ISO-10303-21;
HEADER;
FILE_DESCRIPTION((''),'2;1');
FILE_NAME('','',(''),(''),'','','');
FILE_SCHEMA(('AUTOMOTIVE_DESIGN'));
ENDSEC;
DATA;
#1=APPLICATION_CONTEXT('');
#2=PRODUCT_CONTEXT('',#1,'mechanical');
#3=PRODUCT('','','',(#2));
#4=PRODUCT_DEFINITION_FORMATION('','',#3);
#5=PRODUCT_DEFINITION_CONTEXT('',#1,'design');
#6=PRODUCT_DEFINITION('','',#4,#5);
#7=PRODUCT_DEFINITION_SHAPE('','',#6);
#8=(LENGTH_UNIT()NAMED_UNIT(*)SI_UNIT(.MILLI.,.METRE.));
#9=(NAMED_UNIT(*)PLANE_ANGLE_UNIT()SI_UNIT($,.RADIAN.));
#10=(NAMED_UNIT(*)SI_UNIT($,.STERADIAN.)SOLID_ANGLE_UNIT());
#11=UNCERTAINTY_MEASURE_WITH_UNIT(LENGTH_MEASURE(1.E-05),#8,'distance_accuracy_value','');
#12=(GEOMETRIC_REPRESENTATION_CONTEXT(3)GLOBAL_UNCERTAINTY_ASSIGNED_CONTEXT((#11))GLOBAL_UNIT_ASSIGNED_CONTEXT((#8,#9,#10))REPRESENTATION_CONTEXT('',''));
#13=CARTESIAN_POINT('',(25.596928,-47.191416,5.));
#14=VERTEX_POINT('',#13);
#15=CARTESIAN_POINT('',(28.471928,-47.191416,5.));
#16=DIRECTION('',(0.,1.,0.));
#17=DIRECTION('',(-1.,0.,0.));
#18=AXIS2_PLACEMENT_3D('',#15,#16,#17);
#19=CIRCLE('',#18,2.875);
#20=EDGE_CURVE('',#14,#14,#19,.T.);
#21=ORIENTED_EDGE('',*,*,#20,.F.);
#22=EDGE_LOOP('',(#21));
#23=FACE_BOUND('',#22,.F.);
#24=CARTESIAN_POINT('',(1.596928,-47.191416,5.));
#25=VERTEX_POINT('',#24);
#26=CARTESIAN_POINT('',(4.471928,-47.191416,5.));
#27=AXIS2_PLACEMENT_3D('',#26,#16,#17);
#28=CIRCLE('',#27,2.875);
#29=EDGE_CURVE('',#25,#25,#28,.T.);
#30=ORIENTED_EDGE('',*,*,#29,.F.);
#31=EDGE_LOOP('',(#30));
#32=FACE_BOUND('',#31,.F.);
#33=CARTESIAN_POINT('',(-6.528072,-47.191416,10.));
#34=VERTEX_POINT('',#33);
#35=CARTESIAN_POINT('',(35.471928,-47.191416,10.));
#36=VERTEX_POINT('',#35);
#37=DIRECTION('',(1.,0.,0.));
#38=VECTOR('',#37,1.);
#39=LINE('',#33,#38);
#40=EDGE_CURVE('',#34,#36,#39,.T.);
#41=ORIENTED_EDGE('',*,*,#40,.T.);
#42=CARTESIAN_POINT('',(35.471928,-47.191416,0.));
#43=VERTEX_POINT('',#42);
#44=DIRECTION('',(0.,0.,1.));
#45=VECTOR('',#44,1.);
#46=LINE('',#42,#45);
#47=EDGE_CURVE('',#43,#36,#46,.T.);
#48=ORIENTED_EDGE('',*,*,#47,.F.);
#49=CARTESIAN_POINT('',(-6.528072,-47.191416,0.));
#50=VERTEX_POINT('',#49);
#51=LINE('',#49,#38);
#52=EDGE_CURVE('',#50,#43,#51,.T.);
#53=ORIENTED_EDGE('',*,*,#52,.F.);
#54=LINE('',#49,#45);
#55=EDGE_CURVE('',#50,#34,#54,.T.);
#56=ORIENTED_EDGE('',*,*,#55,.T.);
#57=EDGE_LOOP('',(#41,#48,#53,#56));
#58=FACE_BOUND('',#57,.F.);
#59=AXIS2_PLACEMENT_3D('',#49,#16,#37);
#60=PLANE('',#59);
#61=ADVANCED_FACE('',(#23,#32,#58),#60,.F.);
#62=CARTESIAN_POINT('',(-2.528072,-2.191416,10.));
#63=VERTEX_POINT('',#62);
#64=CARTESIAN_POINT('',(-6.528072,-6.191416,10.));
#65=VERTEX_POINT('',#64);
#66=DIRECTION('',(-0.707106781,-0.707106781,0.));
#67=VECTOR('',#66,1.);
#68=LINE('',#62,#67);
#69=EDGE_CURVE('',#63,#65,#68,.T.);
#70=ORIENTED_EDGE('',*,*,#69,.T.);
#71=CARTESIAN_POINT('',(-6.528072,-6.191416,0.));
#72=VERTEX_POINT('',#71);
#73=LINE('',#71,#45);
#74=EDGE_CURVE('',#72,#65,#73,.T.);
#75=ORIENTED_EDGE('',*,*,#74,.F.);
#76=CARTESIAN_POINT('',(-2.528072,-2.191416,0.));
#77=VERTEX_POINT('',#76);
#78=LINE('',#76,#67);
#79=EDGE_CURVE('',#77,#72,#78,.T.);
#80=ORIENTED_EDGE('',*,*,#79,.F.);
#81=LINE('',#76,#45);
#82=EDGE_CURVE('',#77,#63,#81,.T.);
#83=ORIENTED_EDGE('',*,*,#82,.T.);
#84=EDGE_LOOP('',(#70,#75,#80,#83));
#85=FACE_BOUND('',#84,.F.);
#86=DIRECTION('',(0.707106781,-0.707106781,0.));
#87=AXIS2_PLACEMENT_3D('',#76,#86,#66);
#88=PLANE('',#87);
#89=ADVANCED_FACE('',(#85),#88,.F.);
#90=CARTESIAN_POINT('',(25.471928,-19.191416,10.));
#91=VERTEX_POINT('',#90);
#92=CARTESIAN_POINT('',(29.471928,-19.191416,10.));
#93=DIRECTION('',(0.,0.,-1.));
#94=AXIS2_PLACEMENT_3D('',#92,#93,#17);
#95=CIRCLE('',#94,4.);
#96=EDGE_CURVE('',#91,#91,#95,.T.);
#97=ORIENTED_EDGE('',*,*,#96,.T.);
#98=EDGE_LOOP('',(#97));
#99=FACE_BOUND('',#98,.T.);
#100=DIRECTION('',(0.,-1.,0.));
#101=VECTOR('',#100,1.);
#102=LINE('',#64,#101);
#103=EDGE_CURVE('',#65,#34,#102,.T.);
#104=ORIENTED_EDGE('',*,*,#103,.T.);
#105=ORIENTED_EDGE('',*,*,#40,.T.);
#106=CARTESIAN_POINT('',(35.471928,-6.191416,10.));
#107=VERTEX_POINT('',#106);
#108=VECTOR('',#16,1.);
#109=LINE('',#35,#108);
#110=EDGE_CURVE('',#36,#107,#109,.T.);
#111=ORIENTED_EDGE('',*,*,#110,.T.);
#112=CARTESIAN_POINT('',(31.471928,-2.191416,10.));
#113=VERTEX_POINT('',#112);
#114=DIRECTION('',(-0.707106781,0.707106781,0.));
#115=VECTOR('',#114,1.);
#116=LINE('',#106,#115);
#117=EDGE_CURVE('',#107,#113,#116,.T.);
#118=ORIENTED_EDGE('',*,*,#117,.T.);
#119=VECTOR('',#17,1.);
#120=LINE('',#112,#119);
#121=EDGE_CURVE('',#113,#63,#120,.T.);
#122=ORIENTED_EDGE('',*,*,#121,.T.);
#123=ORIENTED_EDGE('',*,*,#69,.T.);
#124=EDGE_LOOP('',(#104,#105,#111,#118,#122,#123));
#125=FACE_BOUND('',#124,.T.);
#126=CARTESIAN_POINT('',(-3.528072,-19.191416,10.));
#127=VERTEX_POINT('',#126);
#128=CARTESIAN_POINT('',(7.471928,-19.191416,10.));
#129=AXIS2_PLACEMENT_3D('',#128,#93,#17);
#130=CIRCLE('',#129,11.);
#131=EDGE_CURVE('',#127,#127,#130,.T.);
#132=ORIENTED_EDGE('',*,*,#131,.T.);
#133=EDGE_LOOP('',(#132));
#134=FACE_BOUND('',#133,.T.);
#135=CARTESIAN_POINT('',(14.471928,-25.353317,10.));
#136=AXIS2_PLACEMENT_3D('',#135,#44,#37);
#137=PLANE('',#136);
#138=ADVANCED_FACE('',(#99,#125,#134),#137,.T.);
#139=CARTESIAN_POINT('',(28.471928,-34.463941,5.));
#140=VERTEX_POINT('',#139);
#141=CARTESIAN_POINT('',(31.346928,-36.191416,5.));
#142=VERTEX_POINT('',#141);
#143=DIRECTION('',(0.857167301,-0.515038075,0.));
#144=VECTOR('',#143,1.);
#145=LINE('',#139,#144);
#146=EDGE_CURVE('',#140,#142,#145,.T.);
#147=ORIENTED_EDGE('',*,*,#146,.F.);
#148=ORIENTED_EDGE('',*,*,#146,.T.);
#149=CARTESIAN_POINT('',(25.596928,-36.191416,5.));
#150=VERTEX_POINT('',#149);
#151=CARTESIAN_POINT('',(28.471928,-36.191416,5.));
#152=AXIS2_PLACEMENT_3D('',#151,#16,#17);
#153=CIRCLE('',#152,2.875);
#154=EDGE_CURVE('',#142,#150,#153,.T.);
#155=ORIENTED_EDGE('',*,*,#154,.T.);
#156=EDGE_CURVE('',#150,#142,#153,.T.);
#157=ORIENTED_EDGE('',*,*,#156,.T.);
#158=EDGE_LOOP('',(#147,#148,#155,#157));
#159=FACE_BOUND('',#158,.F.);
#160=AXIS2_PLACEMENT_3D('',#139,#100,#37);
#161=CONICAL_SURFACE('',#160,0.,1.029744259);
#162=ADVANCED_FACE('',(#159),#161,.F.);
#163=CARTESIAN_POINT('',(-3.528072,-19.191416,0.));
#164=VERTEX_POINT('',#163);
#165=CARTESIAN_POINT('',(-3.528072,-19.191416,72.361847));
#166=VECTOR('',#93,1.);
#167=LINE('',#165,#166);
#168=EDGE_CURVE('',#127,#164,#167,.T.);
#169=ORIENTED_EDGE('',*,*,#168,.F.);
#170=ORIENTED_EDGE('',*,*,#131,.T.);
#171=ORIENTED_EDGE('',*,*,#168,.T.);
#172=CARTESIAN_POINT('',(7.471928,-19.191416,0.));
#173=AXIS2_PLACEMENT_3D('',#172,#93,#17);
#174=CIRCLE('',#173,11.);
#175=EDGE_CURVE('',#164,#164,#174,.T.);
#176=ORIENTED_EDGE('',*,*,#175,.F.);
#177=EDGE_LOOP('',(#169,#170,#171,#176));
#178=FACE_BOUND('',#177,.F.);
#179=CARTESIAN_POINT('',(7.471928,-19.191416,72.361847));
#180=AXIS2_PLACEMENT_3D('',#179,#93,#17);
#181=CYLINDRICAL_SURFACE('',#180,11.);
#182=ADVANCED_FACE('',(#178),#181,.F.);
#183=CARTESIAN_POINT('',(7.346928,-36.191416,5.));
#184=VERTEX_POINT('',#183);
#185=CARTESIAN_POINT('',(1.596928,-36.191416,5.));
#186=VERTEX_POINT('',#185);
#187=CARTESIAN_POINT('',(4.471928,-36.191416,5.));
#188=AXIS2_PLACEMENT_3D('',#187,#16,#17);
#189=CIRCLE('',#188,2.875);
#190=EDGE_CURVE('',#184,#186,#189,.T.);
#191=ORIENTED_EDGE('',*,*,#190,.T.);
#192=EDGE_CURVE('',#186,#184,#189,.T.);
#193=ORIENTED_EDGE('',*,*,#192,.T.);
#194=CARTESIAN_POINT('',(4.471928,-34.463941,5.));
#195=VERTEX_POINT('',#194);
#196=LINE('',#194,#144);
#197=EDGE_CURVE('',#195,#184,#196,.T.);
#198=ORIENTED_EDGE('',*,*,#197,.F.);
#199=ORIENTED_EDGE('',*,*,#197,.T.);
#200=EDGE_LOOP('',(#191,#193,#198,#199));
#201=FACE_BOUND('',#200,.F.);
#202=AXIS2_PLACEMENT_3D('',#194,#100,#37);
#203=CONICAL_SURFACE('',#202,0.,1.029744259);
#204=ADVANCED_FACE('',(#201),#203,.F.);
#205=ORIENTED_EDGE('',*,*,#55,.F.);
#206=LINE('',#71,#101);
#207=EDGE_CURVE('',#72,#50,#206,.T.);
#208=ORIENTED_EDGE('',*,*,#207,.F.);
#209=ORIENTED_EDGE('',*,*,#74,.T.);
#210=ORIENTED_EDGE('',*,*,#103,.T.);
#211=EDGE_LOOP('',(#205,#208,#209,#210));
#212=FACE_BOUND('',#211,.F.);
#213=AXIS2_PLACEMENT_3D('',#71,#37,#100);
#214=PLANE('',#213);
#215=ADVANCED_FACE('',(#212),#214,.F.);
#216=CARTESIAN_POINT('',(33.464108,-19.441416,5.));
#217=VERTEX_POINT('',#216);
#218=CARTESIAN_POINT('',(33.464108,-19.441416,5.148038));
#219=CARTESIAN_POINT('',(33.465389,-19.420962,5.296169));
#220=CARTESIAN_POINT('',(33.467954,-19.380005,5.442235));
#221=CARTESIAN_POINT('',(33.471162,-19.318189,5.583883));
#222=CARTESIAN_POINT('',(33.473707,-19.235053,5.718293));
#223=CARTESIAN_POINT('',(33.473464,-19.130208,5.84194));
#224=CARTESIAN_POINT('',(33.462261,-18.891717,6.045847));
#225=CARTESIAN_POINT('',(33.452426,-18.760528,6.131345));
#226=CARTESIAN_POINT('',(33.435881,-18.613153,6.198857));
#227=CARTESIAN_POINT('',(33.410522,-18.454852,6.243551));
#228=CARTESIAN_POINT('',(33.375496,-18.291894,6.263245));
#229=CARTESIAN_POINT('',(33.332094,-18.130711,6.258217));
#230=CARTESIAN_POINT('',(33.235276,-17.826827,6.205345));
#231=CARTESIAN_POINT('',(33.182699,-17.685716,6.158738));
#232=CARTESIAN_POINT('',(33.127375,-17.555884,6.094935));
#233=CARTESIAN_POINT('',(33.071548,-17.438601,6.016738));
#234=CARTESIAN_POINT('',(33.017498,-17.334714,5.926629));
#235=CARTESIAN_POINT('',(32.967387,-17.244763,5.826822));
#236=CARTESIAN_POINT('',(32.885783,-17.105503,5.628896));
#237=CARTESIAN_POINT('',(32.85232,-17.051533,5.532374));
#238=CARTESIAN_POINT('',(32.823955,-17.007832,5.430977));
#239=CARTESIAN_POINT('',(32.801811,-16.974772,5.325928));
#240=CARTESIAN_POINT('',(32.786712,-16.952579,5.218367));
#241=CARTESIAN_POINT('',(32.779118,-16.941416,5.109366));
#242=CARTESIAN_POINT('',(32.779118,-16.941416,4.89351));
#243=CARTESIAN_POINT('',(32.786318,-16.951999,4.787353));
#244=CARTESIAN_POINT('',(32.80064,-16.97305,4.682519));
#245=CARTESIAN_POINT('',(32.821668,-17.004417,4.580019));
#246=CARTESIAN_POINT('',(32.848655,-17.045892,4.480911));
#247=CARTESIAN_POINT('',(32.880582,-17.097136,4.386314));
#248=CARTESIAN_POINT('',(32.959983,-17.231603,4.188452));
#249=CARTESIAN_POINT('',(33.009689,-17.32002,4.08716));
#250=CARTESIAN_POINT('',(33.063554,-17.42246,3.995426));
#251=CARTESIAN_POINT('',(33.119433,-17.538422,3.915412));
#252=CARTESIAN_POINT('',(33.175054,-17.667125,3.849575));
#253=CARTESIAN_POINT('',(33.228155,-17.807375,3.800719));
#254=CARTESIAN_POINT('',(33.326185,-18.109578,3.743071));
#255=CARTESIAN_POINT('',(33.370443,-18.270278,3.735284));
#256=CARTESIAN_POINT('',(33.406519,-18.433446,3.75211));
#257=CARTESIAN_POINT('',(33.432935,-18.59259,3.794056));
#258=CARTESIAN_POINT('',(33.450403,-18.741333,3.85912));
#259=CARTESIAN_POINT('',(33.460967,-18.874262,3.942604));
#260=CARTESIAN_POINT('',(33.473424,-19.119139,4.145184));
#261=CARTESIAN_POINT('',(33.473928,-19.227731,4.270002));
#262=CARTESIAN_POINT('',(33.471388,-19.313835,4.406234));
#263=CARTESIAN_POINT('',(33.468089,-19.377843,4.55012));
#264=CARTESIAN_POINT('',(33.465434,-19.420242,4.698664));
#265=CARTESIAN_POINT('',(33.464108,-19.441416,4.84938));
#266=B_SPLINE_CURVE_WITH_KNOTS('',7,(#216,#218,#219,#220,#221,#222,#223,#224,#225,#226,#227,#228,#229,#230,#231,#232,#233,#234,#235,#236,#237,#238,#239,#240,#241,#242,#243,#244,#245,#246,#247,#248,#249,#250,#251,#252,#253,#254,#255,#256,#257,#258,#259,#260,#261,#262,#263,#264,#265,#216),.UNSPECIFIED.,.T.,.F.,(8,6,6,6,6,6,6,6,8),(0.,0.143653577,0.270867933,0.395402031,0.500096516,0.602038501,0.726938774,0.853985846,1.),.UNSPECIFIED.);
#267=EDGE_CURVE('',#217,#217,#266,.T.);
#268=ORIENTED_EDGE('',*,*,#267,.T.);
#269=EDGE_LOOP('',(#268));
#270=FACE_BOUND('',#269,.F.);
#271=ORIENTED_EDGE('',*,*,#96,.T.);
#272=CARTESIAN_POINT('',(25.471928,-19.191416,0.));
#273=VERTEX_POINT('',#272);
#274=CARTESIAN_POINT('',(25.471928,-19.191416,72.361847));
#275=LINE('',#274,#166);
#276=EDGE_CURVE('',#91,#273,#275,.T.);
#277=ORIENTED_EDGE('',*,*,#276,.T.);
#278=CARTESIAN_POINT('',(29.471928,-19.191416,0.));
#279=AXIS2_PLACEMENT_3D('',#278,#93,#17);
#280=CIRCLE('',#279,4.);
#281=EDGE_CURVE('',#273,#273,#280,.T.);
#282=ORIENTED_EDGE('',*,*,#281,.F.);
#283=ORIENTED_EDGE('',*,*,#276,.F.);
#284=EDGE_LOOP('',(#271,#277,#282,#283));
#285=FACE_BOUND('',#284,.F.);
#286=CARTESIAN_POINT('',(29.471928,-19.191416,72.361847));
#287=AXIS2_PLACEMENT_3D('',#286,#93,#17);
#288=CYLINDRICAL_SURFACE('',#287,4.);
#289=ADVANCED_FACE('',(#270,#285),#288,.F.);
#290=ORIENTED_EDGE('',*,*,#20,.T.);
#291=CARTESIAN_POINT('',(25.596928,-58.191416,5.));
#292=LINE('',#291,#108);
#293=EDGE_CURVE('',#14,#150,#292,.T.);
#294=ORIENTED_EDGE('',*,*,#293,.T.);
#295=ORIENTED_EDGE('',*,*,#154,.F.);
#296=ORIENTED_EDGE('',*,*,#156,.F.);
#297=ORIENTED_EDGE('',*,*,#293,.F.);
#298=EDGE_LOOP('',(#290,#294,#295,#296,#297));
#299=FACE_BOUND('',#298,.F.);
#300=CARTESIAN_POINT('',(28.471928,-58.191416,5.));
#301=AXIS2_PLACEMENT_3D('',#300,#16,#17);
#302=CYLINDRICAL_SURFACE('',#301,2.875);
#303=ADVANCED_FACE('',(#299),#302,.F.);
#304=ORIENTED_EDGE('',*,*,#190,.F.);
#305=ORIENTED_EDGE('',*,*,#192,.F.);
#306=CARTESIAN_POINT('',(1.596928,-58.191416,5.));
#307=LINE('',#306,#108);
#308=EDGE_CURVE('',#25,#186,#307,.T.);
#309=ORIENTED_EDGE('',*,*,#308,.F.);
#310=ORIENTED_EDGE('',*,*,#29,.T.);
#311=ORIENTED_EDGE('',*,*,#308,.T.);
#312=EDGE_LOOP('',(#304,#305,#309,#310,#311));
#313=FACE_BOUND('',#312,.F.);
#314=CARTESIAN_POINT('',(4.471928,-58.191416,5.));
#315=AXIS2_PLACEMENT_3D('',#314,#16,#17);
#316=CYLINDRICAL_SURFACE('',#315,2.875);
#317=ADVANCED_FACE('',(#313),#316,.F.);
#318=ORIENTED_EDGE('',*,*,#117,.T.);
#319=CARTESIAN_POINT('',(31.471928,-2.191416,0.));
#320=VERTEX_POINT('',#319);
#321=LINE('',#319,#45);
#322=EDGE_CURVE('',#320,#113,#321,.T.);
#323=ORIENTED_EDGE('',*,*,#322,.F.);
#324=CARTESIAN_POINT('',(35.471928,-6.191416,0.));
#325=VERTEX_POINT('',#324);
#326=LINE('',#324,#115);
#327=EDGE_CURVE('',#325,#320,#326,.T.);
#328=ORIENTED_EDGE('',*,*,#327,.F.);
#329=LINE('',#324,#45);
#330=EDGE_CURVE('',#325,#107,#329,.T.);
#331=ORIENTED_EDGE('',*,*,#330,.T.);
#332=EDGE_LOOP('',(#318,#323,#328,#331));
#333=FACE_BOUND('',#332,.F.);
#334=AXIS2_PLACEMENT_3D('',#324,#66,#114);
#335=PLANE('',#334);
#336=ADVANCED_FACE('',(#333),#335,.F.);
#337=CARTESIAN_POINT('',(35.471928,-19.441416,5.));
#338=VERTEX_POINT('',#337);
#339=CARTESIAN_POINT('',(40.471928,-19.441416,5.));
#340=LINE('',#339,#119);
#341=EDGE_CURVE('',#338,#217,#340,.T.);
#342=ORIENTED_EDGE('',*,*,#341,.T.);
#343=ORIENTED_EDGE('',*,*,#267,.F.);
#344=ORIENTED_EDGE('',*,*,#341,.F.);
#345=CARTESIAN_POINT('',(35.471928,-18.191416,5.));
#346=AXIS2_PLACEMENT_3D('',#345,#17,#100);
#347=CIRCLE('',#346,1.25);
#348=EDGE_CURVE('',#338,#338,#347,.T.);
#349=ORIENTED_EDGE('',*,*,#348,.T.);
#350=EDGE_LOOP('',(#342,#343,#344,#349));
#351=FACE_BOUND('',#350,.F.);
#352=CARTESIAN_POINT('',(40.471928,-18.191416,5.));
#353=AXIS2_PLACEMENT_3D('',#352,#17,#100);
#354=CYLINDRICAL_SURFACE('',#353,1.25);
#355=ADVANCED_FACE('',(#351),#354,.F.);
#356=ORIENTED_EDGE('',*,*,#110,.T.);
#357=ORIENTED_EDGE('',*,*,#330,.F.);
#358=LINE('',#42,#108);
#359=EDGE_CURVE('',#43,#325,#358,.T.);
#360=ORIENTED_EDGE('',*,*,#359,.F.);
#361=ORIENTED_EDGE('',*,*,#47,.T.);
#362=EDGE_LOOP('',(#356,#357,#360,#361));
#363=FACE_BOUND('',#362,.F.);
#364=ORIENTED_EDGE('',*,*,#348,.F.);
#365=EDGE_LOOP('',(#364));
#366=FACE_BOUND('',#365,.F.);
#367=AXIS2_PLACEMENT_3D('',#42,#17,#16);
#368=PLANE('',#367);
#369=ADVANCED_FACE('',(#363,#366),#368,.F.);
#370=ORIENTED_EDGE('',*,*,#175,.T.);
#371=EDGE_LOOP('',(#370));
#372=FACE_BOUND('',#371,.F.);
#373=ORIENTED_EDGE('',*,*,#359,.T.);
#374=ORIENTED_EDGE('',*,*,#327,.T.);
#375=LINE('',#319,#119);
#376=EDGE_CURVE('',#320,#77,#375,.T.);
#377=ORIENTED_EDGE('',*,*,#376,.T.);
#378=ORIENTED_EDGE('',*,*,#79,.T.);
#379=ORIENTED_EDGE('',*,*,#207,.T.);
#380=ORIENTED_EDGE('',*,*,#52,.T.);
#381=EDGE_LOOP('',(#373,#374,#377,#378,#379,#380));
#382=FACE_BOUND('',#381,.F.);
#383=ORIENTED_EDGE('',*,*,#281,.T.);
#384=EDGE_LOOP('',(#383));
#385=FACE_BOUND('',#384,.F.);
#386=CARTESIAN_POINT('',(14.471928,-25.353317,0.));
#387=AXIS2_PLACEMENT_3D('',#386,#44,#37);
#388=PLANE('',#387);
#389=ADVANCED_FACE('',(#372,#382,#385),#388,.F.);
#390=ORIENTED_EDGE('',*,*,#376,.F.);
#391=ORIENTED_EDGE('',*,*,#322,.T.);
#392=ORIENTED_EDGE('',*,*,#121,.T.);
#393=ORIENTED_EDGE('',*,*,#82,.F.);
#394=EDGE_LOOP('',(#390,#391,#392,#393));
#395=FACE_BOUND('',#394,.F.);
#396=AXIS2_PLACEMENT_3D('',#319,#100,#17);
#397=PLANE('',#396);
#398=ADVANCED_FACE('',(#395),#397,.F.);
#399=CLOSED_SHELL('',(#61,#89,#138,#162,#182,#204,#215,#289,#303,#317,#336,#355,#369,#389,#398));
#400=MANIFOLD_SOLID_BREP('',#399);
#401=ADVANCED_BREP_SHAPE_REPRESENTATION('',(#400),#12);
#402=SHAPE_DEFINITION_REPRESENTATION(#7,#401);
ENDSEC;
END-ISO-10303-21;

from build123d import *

# Parameters (mm, degrees)
F1_DEPTH = 10
F3_D     = 22
F4_D     = 8
F6_D     = 2.5
F6_DEPTH = 5
F6_TIP   = 0.7510757738
F8_D     = 5.75
F8_DEPTH = 11
F8_TIP   = 1.7274742797


# Not quite as in the source:
# - a feature names something its author has since deleted; it is built from what else it names


with BuildPart() as f1:
    # F0 (on Top) → F1 (new body)
    with BuildSketch(Plane.XY):
        Polygon((-6.5280715935, -6.1914156973), (-6.5280715935, -47.1914156973), (35.4719284065, -47.1914156973), (35.4719284065, -6.1914156973), (31.4719284065, -2.1914156973), (-2.5280715935, -2.1914156973), align=None)
    extrude(amount=F1_DEPTH)

    # F3 (through all)
    with Locations(Plane.XY.offset(10)):
        with Locations((7.4719284065, -19.1914156973)):
            Hole(F3_D / 2)

    # F4 (through all)
    with Locations(Plane.XY.offset(10)):
        with Locations((29.4719284065, -19.1914156973)):
            Hole(F4_D / 2)

    # F6
    with Locations(Plane.YZ.offset(35.4719284065)):
        with Locations((-18.1914156973, 5)):
            Hole(F6_D / 2, depth=F6_DEPTH)
            with Locations((0, 0, -(F6_DEPTH + F6_TIP / 2))):  # 118° drill point
                Cone(0, F6_D / 2, F6_TIP, mode=Mode.SUBTRACT)

    # F8
    with Locations(Plane.XZ.offset(47.1914156973)):
        with Locations((28.4719284065, 5), (4.4719284065, 5)):
            Hole(F8_D / 2, depth=F8_DEPTH)
            with Locations((0, 0, -(F8_DEPTH + F8_TIP / 2))):  # 118° drill point
                Cone(0, F8_D / 2, F8_TIP, mode=Mode.SUBTRACT)


solid = f1.part
